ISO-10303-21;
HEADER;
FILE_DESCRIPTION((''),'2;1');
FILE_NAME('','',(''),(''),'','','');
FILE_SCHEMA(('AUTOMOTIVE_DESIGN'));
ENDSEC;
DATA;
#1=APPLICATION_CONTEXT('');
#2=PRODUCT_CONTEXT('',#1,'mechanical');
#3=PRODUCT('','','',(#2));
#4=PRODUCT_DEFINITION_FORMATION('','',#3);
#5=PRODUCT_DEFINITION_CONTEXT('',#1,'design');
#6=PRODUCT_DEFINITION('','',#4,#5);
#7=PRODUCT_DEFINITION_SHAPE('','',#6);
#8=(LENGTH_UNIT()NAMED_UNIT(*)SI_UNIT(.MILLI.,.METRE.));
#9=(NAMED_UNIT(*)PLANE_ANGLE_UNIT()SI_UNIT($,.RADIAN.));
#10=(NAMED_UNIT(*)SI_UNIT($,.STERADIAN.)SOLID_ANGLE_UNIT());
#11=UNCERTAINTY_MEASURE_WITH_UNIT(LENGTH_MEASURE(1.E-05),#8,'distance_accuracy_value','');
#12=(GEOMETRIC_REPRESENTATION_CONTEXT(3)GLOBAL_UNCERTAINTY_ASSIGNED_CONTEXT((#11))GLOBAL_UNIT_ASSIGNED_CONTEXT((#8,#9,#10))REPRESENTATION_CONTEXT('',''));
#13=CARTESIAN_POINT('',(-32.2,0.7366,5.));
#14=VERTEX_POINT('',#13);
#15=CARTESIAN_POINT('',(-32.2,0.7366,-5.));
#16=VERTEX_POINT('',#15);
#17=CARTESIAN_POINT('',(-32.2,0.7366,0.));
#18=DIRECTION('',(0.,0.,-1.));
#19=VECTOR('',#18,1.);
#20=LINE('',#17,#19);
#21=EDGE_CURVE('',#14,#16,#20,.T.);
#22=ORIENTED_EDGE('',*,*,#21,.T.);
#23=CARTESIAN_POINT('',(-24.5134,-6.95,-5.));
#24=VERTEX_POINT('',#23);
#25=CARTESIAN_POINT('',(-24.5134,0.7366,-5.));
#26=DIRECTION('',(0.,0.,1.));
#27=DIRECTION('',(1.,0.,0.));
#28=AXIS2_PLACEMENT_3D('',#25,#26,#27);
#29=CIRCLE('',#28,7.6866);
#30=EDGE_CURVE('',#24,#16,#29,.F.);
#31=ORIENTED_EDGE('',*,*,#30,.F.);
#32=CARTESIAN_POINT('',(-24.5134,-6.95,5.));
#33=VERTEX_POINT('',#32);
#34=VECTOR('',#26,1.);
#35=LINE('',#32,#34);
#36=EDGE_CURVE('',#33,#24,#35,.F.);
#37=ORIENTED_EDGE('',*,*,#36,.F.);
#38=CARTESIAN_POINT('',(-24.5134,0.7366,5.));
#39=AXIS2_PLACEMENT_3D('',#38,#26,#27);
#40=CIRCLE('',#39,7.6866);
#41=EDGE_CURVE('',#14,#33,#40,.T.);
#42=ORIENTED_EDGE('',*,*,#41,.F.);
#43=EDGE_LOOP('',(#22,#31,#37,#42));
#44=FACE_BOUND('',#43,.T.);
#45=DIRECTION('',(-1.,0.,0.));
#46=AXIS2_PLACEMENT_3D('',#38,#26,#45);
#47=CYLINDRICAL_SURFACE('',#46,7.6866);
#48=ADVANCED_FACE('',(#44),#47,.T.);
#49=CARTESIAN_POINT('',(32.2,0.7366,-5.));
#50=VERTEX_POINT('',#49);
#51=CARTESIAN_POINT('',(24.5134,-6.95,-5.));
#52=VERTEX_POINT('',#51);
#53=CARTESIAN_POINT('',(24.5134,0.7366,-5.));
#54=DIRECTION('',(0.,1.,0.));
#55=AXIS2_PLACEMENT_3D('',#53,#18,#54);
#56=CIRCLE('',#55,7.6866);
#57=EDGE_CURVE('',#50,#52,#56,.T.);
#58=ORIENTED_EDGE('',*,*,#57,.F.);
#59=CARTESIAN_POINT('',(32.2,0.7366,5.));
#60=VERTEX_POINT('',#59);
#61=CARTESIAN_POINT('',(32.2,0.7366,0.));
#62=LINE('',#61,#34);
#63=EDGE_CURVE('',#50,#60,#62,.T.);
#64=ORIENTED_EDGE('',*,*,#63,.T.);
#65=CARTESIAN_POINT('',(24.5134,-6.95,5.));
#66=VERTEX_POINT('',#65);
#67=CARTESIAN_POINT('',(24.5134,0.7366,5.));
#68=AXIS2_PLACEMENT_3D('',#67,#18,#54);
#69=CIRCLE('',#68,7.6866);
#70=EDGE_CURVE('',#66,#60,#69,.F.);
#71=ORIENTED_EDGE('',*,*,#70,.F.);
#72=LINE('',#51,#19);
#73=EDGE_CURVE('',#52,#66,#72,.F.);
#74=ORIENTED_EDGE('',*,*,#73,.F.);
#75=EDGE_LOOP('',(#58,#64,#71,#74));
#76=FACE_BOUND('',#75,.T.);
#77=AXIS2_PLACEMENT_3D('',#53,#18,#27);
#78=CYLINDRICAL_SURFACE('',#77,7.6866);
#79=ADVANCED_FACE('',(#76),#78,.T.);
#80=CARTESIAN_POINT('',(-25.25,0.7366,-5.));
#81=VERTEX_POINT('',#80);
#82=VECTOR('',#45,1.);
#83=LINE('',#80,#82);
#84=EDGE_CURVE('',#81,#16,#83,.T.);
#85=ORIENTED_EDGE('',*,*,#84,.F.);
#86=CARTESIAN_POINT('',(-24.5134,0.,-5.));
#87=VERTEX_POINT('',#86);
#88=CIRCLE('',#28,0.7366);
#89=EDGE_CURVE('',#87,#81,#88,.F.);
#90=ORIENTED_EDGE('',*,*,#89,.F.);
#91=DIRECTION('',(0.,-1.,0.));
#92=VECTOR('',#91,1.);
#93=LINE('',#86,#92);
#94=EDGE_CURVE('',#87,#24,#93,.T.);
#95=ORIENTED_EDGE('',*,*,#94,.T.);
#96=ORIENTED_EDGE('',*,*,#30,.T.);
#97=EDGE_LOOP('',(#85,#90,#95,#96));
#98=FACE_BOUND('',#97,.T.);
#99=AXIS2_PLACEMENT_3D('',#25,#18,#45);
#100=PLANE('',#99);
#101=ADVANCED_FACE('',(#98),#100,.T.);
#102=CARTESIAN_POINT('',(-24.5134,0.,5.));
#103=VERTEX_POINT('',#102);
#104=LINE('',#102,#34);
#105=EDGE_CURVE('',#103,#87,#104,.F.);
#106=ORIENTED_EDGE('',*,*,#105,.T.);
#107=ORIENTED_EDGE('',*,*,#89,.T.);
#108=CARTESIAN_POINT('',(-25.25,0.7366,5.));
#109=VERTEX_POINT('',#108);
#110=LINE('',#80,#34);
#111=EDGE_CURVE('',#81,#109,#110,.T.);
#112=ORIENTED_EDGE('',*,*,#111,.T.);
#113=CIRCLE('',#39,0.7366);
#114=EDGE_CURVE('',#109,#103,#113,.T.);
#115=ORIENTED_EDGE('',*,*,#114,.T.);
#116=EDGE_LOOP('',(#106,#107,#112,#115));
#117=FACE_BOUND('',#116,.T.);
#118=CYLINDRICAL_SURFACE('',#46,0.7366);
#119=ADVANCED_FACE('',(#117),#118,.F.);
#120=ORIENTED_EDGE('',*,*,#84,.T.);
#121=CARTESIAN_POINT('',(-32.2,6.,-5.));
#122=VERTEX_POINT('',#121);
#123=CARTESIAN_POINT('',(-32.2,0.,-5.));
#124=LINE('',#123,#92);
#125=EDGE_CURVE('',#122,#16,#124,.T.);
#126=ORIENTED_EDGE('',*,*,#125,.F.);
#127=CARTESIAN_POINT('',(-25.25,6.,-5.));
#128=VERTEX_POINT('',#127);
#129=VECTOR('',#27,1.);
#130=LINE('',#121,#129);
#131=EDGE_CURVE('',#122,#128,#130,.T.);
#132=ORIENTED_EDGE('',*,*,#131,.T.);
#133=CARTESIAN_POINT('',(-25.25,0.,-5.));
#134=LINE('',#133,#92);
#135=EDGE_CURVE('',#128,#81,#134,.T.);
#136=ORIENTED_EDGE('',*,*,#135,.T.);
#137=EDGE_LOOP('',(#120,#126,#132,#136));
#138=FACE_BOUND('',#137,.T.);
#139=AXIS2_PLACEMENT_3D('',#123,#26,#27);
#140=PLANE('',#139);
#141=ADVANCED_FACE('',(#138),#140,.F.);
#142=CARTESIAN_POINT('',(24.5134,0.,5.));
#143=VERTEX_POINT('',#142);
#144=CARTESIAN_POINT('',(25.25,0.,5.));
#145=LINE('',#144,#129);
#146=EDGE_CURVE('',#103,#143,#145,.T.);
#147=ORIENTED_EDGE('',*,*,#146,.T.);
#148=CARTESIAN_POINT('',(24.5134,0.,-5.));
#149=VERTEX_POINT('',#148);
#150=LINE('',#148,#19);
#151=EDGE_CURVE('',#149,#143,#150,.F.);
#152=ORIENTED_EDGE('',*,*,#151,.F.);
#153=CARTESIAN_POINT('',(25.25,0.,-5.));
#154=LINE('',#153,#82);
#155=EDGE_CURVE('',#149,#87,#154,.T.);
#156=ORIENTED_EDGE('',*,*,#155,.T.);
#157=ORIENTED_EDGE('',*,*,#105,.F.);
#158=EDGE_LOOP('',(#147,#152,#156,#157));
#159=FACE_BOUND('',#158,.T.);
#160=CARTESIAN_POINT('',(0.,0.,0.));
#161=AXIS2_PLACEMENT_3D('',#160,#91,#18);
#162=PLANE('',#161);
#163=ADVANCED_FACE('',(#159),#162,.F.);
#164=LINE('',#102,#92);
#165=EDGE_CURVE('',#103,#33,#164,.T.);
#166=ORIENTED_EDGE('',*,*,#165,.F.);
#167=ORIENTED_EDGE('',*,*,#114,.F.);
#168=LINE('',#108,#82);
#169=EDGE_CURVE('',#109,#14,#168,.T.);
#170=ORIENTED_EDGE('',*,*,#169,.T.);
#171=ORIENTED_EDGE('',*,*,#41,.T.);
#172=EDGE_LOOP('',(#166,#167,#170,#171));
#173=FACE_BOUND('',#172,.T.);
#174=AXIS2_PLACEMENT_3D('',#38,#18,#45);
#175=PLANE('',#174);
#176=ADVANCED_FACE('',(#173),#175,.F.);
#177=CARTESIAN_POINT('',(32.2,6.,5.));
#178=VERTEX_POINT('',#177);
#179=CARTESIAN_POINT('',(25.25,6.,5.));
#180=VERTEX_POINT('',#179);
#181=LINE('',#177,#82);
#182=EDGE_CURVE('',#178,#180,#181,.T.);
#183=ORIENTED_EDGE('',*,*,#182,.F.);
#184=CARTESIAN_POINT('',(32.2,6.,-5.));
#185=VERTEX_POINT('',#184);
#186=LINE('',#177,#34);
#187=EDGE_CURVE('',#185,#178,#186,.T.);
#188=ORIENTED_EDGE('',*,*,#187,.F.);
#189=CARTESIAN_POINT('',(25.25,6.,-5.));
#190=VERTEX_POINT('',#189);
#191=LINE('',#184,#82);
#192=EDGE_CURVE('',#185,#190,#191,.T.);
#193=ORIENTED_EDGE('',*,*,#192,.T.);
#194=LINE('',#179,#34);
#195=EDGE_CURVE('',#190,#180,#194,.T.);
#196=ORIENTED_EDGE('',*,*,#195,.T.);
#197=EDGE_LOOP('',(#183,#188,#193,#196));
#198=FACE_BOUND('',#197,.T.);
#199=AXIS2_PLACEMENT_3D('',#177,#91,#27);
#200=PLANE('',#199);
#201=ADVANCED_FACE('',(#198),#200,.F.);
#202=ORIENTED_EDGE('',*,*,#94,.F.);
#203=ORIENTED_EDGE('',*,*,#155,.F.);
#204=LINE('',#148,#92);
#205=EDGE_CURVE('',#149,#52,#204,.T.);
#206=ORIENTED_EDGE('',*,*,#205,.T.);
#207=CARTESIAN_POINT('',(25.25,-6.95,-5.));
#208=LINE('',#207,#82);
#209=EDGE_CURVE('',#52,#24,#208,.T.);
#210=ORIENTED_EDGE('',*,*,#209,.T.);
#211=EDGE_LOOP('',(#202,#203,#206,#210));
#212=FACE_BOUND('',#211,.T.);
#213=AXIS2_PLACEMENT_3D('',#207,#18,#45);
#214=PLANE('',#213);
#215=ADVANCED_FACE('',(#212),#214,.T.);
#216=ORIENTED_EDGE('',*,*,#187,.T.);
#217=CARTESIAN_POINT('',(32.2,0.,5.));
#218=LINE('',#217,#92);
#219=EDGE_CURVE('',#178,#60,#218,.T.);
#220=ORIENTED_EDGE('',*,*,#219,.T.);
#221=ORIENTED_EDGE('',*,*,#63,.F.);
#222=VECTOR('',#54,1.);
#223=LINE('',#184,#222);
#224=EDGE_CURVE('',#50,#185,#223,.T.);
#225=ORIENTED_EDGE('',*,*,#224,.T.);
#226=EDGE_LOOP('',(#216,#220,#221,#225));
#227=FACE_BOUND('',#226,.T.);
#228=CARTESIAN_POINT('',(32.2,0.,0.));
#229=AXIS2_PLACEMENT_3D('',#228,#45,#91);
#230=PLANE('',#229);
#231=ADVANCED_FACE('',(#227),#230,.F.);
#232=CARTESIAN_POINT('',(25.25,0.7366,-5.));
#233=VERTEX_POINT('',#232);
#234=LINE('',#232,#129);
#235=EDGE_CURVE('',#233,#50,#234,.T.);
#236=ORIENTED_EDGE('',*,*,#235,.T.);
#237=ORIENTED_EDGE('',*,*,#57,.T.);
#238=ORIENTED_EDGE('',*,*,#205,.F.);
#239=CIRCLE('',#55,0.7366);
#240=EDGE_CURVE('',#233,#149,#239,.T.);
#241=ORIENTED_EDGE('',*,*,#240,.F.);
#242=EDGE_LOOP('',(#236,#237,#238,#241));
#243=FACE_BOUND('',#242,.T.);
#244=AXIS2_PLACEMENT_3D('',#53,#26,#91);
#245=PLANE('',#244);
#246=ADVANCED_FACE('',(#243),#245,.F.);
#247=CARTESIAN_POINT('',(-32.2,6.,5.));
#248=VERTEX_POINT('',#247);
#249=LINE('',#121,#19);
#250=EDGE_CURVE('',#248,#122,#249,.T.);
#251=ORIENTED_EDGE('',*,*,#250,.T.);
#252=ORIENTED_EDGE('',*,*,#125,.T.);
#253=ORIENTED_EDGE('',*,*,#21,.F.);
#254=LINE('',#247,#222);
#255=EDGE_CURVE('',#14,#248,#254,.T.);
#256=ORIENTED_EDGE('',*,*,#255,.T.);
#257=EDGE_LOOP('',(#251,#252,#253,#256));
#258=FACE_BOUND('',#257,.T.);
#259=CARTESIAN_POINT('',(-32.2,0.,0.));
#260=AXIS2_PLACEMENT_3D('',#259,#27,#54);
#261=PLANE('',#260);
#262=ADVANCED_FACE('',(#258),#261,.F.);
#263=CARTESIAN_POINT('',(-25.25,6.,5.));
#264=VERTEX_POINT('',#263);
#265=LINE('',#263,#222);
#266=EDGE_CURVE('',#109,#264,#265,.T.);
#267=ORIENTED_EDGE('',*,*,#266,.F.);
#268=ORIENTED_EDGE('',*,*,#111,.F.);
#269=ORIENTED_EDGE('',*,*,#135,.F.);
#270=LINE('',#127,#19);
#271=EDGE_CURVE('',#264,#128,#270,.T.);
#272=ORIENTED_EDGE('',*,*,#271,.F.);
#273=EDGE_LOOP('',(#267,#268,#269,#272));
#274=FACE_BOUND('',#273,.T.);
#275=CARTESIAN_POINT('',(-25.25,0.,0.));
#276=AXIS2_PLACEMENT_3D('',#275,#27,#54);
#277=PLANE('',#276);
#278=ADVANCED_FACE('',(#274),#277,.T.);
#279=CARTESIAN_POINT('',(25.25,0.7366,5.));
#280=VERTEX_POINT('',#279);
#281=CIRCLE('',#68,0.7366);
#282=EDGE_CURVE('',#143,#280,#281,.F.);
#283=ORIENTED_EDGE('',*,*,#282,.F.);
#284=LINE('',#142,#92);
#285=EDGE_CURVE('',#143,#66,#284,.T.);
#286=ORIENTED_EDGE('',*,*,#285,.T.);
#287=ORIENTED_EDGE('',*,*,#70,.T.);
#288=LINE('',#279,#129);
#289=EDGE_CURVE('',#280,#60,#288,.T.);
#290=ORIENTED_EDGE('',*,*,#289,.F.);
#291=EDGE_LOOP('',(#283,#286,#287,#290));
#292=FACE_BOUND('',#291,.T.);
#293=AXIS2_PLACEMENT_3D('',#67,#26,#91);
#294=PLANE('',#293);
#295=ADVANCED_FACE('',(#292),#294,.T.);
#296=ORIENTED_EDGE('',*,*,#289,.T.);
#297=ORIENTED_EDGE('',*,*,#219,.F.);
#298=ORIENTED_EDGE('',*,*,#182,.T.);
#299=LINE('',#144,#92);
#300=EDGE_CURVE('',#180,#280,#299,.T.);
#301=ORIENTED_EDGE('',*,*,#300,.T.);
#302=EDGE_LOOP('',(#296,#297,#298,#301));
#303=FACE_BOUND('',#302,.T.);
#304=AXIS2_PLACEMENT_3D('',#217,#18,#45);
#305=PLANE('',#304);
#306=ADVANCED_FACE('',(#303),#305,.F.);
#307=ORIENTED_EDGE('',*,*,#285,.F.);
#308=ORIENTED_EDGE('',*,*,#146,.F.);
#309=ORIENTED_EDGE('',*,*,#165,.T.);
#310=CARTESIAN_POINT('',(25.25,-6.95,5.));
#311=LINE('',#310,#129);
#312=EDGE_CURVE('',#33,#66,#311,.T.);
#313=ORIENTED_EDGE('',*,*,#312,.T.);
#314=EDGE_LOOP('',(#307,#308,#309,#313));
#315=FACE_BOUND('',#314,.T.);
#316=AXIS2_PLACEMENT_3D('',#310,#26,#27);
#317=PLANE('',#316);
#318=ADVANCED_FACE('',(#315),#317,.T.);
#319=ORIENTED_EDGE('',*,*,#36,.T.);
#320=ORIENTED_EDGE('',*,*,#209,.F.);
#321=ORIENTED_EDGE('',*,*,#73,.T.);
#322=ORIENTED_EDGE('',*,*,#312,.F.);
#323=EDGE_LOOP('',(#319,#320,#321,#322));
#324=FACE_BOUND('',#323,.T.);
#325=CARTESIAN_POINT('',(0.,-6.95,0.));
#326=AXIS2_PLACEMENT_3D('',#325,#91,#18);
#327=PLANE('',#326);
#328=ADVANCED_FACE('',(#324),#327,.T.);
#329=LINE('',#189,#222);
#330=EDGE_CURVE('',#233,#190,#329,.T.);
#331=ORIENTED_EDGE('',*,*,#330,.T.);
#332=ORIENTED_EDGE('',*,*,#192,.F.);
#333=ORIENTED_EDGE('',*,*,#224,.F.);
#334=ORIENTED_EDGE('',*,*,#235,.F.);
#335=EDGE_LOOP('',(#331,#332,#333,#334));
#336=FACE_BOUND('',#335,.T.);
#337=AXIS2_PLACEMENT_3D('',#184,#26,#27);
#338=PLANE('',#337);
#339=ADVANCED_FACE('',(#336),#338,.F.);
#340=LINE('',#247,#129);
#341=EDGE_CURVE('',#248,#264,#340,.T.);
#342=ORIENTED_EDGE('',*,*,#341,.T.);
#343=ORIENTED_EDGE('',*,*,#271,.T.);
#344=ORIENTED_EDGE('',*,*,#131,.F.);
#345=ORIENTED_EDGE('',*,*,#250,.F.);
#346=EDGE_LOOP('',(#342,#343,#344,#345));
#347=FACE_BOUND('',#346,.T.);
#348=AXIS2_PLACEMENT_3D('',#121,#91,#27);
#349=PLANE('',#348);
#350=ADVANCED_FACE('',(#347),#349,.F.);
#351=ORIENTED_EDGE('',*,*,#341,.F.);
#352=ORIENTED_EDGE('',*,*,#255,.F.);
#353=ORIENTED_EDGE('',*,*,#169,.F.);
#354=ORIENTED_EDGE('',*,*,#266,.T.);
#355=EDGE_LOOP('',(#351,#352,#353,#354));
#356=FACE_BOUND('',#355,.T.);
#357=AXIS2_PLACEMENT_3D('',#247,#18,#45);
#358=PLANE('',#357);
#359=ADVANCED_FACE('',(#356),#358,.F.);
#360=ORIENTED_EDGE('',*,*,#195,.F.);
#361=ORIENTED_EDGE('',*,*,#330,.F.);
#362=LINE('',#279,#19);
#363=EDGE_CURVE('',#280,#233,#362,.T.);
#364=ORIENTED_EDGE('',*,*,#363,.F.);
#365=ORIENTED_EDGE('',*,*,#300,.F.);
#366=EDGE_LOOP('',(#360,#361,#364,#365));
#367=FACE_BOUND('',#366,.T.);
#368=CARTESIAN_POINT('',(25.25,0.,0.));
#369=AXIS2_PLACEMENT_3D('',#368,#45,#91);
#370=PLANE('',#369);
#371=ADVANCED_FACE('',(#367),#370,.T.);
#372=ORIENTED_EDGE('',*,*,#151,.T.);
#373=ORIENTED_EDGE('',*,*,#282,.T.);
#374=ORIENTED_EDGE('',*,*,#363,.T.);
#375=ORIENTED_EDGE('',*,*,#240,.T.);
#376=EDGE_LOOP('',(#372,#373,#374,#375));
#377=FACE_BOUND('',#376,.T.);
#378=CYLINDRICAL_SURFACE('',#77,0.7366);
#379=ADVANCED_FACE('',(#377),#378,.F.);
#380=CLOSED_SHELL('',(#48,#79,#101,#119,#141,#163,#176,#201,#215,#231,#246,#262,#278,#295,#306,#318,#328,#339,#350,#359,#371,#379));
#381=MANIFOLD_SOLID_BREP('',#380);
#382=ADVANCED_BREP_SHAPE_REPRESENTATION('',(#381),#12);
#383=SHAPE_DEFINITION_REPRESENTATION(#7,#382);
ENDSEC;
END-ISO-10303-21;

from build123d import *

# Parameters (mm, degrees)
SKETCH_2_W                         = 50.5
SKETCH_2_H                         = 10
SM_BASE_FLANGE_1_DEPTH             = 6.95
SM_EDGE_FLANGE_1_STRIP_W           = 29.2732
SM_EDGE_FLANGE_1_STRIP_H           = 6.95
SM_EDGE_FLANGE_1_STRIP_CUT_DEPTH   = 10
SM_EDGE_FLANGE_1_STRIP_2_W         = 29.2732
SM_EDGE_FLANGE_1_STRIP_2_H         = 6.95
SM_EDGE_FLANGE_1_STRIP_CUT_2_DEPTH = 10
SM_EDGE_FLANGE_1_DEPTH             = 10
SM_EDGE_FLANGE_1_BEND_DEPTH        = 10


# Sheet-metal steps are written as plain solids
with BuildPart() as part:
    # Эскиз2 → Базовая кромка1 (new body)
    with BuildSketch(Plane(origin=(0, 0, 0), x_dir=(1, 0, 0), z_dir=(0, 1, 0))):
        Rectangle(SKETCH_2_W, SKETCH_2_H)
    extrude(amount=-SM_BASE_FLANGE_1_DEPTH)

    # Ребро-кромка1 strip (across the edge) → Ребро-кромка1 strip cut (cut)
    with BuildSketch(Plane(origin=(-25.25, 0, -5), x_dir=(1, 0, 0), z_dir=(0, 0, 1))):
        with Locations((-13.9, -3.475)):
            Rectangle(SM_EDGE_FLANGE_1_STRIP_W, SM_EDGE_FLANGE_1_STRIP_H)
    extrude(amount=SM_EDGE_FLANGE_1_STRIP_CUT_DEPTH, mode=Mode.SUBTRACT)

    # Ребро-кромка1 strip 2 (across the edge) → Ребро-кромка1 strip cut 2 (cut)
    with BuildSketch(Plane(origin=(25.25, 0, 5), x_dir=(-1, 0, 0), z_dir=(0, 0, -1))):
        with Locations((-13.9, -3.475)):
            Rectangle(SM_EDGE_FLANGE_1_STRIP_2_W, SM_EDGE_FLANGE_1_STRIP_2_H)
    extrude(amount=SM_EDGE_FLANGE_1_STRIP_CUT_2_DEPTH, mode=Mode.SUBTRACT)

    # Ребро-кромка1 section (across the edge) → Ребро-кромка1 (add)
    with BuildSketch(Plane(origin=(-25.25, 0, -5), x_dir=(1, 0, 0), z_dir=(0, 0, 1))):
        with BuildLine():
            Line((-6.95, 0.7366), (-6.95, 6))
            Line((-6.95, 6), (0, 6))
            Line((0, 6), (0, 0.7366))
            ThreePointArc((0, 0.7366), (0.215745145, 0.215745145), (0.7366, 0))
            Line((0.7366, 0), (0.7366, -6.95))
            ThreePointArc((0.7366, -6.95), (-4.698646984, -4.698646984), (-6.95, 0.7366))
        make_face()
    extrude(amount=SM_EDGE_FLANGE_1_DEPTH)

    # Ребро-кромка1 section 2 (across the edge) → Ребро-кромка1 bend (add)
    with BuildSketch(Plane(origin=(25.25, 0, 5), x_dir=(-1, 0, 0), z_dir=(0, 0, -1))):
        with BuildLine():
            Line((-6.95, 0.7366), (-6.95, 6))
            Line((-6.95, 6), (0, 6))
            Line((0, 6), (0, 0.7366))
            ThreePointArc((0, 0.7366), (0.215745145, 0.215745145), (0.7366, 0))
            Line((0.7366, 0), (0.7366, -6.95))
            ThreePointArc((0.7366, -6.95), (-4.698646984, -4.698646984), (-6.95, 0.7366))
        make_face()
    extrude(amount=SM_EDGE_FLANGE_1_BEND_DEPTH)


solid = part.part
